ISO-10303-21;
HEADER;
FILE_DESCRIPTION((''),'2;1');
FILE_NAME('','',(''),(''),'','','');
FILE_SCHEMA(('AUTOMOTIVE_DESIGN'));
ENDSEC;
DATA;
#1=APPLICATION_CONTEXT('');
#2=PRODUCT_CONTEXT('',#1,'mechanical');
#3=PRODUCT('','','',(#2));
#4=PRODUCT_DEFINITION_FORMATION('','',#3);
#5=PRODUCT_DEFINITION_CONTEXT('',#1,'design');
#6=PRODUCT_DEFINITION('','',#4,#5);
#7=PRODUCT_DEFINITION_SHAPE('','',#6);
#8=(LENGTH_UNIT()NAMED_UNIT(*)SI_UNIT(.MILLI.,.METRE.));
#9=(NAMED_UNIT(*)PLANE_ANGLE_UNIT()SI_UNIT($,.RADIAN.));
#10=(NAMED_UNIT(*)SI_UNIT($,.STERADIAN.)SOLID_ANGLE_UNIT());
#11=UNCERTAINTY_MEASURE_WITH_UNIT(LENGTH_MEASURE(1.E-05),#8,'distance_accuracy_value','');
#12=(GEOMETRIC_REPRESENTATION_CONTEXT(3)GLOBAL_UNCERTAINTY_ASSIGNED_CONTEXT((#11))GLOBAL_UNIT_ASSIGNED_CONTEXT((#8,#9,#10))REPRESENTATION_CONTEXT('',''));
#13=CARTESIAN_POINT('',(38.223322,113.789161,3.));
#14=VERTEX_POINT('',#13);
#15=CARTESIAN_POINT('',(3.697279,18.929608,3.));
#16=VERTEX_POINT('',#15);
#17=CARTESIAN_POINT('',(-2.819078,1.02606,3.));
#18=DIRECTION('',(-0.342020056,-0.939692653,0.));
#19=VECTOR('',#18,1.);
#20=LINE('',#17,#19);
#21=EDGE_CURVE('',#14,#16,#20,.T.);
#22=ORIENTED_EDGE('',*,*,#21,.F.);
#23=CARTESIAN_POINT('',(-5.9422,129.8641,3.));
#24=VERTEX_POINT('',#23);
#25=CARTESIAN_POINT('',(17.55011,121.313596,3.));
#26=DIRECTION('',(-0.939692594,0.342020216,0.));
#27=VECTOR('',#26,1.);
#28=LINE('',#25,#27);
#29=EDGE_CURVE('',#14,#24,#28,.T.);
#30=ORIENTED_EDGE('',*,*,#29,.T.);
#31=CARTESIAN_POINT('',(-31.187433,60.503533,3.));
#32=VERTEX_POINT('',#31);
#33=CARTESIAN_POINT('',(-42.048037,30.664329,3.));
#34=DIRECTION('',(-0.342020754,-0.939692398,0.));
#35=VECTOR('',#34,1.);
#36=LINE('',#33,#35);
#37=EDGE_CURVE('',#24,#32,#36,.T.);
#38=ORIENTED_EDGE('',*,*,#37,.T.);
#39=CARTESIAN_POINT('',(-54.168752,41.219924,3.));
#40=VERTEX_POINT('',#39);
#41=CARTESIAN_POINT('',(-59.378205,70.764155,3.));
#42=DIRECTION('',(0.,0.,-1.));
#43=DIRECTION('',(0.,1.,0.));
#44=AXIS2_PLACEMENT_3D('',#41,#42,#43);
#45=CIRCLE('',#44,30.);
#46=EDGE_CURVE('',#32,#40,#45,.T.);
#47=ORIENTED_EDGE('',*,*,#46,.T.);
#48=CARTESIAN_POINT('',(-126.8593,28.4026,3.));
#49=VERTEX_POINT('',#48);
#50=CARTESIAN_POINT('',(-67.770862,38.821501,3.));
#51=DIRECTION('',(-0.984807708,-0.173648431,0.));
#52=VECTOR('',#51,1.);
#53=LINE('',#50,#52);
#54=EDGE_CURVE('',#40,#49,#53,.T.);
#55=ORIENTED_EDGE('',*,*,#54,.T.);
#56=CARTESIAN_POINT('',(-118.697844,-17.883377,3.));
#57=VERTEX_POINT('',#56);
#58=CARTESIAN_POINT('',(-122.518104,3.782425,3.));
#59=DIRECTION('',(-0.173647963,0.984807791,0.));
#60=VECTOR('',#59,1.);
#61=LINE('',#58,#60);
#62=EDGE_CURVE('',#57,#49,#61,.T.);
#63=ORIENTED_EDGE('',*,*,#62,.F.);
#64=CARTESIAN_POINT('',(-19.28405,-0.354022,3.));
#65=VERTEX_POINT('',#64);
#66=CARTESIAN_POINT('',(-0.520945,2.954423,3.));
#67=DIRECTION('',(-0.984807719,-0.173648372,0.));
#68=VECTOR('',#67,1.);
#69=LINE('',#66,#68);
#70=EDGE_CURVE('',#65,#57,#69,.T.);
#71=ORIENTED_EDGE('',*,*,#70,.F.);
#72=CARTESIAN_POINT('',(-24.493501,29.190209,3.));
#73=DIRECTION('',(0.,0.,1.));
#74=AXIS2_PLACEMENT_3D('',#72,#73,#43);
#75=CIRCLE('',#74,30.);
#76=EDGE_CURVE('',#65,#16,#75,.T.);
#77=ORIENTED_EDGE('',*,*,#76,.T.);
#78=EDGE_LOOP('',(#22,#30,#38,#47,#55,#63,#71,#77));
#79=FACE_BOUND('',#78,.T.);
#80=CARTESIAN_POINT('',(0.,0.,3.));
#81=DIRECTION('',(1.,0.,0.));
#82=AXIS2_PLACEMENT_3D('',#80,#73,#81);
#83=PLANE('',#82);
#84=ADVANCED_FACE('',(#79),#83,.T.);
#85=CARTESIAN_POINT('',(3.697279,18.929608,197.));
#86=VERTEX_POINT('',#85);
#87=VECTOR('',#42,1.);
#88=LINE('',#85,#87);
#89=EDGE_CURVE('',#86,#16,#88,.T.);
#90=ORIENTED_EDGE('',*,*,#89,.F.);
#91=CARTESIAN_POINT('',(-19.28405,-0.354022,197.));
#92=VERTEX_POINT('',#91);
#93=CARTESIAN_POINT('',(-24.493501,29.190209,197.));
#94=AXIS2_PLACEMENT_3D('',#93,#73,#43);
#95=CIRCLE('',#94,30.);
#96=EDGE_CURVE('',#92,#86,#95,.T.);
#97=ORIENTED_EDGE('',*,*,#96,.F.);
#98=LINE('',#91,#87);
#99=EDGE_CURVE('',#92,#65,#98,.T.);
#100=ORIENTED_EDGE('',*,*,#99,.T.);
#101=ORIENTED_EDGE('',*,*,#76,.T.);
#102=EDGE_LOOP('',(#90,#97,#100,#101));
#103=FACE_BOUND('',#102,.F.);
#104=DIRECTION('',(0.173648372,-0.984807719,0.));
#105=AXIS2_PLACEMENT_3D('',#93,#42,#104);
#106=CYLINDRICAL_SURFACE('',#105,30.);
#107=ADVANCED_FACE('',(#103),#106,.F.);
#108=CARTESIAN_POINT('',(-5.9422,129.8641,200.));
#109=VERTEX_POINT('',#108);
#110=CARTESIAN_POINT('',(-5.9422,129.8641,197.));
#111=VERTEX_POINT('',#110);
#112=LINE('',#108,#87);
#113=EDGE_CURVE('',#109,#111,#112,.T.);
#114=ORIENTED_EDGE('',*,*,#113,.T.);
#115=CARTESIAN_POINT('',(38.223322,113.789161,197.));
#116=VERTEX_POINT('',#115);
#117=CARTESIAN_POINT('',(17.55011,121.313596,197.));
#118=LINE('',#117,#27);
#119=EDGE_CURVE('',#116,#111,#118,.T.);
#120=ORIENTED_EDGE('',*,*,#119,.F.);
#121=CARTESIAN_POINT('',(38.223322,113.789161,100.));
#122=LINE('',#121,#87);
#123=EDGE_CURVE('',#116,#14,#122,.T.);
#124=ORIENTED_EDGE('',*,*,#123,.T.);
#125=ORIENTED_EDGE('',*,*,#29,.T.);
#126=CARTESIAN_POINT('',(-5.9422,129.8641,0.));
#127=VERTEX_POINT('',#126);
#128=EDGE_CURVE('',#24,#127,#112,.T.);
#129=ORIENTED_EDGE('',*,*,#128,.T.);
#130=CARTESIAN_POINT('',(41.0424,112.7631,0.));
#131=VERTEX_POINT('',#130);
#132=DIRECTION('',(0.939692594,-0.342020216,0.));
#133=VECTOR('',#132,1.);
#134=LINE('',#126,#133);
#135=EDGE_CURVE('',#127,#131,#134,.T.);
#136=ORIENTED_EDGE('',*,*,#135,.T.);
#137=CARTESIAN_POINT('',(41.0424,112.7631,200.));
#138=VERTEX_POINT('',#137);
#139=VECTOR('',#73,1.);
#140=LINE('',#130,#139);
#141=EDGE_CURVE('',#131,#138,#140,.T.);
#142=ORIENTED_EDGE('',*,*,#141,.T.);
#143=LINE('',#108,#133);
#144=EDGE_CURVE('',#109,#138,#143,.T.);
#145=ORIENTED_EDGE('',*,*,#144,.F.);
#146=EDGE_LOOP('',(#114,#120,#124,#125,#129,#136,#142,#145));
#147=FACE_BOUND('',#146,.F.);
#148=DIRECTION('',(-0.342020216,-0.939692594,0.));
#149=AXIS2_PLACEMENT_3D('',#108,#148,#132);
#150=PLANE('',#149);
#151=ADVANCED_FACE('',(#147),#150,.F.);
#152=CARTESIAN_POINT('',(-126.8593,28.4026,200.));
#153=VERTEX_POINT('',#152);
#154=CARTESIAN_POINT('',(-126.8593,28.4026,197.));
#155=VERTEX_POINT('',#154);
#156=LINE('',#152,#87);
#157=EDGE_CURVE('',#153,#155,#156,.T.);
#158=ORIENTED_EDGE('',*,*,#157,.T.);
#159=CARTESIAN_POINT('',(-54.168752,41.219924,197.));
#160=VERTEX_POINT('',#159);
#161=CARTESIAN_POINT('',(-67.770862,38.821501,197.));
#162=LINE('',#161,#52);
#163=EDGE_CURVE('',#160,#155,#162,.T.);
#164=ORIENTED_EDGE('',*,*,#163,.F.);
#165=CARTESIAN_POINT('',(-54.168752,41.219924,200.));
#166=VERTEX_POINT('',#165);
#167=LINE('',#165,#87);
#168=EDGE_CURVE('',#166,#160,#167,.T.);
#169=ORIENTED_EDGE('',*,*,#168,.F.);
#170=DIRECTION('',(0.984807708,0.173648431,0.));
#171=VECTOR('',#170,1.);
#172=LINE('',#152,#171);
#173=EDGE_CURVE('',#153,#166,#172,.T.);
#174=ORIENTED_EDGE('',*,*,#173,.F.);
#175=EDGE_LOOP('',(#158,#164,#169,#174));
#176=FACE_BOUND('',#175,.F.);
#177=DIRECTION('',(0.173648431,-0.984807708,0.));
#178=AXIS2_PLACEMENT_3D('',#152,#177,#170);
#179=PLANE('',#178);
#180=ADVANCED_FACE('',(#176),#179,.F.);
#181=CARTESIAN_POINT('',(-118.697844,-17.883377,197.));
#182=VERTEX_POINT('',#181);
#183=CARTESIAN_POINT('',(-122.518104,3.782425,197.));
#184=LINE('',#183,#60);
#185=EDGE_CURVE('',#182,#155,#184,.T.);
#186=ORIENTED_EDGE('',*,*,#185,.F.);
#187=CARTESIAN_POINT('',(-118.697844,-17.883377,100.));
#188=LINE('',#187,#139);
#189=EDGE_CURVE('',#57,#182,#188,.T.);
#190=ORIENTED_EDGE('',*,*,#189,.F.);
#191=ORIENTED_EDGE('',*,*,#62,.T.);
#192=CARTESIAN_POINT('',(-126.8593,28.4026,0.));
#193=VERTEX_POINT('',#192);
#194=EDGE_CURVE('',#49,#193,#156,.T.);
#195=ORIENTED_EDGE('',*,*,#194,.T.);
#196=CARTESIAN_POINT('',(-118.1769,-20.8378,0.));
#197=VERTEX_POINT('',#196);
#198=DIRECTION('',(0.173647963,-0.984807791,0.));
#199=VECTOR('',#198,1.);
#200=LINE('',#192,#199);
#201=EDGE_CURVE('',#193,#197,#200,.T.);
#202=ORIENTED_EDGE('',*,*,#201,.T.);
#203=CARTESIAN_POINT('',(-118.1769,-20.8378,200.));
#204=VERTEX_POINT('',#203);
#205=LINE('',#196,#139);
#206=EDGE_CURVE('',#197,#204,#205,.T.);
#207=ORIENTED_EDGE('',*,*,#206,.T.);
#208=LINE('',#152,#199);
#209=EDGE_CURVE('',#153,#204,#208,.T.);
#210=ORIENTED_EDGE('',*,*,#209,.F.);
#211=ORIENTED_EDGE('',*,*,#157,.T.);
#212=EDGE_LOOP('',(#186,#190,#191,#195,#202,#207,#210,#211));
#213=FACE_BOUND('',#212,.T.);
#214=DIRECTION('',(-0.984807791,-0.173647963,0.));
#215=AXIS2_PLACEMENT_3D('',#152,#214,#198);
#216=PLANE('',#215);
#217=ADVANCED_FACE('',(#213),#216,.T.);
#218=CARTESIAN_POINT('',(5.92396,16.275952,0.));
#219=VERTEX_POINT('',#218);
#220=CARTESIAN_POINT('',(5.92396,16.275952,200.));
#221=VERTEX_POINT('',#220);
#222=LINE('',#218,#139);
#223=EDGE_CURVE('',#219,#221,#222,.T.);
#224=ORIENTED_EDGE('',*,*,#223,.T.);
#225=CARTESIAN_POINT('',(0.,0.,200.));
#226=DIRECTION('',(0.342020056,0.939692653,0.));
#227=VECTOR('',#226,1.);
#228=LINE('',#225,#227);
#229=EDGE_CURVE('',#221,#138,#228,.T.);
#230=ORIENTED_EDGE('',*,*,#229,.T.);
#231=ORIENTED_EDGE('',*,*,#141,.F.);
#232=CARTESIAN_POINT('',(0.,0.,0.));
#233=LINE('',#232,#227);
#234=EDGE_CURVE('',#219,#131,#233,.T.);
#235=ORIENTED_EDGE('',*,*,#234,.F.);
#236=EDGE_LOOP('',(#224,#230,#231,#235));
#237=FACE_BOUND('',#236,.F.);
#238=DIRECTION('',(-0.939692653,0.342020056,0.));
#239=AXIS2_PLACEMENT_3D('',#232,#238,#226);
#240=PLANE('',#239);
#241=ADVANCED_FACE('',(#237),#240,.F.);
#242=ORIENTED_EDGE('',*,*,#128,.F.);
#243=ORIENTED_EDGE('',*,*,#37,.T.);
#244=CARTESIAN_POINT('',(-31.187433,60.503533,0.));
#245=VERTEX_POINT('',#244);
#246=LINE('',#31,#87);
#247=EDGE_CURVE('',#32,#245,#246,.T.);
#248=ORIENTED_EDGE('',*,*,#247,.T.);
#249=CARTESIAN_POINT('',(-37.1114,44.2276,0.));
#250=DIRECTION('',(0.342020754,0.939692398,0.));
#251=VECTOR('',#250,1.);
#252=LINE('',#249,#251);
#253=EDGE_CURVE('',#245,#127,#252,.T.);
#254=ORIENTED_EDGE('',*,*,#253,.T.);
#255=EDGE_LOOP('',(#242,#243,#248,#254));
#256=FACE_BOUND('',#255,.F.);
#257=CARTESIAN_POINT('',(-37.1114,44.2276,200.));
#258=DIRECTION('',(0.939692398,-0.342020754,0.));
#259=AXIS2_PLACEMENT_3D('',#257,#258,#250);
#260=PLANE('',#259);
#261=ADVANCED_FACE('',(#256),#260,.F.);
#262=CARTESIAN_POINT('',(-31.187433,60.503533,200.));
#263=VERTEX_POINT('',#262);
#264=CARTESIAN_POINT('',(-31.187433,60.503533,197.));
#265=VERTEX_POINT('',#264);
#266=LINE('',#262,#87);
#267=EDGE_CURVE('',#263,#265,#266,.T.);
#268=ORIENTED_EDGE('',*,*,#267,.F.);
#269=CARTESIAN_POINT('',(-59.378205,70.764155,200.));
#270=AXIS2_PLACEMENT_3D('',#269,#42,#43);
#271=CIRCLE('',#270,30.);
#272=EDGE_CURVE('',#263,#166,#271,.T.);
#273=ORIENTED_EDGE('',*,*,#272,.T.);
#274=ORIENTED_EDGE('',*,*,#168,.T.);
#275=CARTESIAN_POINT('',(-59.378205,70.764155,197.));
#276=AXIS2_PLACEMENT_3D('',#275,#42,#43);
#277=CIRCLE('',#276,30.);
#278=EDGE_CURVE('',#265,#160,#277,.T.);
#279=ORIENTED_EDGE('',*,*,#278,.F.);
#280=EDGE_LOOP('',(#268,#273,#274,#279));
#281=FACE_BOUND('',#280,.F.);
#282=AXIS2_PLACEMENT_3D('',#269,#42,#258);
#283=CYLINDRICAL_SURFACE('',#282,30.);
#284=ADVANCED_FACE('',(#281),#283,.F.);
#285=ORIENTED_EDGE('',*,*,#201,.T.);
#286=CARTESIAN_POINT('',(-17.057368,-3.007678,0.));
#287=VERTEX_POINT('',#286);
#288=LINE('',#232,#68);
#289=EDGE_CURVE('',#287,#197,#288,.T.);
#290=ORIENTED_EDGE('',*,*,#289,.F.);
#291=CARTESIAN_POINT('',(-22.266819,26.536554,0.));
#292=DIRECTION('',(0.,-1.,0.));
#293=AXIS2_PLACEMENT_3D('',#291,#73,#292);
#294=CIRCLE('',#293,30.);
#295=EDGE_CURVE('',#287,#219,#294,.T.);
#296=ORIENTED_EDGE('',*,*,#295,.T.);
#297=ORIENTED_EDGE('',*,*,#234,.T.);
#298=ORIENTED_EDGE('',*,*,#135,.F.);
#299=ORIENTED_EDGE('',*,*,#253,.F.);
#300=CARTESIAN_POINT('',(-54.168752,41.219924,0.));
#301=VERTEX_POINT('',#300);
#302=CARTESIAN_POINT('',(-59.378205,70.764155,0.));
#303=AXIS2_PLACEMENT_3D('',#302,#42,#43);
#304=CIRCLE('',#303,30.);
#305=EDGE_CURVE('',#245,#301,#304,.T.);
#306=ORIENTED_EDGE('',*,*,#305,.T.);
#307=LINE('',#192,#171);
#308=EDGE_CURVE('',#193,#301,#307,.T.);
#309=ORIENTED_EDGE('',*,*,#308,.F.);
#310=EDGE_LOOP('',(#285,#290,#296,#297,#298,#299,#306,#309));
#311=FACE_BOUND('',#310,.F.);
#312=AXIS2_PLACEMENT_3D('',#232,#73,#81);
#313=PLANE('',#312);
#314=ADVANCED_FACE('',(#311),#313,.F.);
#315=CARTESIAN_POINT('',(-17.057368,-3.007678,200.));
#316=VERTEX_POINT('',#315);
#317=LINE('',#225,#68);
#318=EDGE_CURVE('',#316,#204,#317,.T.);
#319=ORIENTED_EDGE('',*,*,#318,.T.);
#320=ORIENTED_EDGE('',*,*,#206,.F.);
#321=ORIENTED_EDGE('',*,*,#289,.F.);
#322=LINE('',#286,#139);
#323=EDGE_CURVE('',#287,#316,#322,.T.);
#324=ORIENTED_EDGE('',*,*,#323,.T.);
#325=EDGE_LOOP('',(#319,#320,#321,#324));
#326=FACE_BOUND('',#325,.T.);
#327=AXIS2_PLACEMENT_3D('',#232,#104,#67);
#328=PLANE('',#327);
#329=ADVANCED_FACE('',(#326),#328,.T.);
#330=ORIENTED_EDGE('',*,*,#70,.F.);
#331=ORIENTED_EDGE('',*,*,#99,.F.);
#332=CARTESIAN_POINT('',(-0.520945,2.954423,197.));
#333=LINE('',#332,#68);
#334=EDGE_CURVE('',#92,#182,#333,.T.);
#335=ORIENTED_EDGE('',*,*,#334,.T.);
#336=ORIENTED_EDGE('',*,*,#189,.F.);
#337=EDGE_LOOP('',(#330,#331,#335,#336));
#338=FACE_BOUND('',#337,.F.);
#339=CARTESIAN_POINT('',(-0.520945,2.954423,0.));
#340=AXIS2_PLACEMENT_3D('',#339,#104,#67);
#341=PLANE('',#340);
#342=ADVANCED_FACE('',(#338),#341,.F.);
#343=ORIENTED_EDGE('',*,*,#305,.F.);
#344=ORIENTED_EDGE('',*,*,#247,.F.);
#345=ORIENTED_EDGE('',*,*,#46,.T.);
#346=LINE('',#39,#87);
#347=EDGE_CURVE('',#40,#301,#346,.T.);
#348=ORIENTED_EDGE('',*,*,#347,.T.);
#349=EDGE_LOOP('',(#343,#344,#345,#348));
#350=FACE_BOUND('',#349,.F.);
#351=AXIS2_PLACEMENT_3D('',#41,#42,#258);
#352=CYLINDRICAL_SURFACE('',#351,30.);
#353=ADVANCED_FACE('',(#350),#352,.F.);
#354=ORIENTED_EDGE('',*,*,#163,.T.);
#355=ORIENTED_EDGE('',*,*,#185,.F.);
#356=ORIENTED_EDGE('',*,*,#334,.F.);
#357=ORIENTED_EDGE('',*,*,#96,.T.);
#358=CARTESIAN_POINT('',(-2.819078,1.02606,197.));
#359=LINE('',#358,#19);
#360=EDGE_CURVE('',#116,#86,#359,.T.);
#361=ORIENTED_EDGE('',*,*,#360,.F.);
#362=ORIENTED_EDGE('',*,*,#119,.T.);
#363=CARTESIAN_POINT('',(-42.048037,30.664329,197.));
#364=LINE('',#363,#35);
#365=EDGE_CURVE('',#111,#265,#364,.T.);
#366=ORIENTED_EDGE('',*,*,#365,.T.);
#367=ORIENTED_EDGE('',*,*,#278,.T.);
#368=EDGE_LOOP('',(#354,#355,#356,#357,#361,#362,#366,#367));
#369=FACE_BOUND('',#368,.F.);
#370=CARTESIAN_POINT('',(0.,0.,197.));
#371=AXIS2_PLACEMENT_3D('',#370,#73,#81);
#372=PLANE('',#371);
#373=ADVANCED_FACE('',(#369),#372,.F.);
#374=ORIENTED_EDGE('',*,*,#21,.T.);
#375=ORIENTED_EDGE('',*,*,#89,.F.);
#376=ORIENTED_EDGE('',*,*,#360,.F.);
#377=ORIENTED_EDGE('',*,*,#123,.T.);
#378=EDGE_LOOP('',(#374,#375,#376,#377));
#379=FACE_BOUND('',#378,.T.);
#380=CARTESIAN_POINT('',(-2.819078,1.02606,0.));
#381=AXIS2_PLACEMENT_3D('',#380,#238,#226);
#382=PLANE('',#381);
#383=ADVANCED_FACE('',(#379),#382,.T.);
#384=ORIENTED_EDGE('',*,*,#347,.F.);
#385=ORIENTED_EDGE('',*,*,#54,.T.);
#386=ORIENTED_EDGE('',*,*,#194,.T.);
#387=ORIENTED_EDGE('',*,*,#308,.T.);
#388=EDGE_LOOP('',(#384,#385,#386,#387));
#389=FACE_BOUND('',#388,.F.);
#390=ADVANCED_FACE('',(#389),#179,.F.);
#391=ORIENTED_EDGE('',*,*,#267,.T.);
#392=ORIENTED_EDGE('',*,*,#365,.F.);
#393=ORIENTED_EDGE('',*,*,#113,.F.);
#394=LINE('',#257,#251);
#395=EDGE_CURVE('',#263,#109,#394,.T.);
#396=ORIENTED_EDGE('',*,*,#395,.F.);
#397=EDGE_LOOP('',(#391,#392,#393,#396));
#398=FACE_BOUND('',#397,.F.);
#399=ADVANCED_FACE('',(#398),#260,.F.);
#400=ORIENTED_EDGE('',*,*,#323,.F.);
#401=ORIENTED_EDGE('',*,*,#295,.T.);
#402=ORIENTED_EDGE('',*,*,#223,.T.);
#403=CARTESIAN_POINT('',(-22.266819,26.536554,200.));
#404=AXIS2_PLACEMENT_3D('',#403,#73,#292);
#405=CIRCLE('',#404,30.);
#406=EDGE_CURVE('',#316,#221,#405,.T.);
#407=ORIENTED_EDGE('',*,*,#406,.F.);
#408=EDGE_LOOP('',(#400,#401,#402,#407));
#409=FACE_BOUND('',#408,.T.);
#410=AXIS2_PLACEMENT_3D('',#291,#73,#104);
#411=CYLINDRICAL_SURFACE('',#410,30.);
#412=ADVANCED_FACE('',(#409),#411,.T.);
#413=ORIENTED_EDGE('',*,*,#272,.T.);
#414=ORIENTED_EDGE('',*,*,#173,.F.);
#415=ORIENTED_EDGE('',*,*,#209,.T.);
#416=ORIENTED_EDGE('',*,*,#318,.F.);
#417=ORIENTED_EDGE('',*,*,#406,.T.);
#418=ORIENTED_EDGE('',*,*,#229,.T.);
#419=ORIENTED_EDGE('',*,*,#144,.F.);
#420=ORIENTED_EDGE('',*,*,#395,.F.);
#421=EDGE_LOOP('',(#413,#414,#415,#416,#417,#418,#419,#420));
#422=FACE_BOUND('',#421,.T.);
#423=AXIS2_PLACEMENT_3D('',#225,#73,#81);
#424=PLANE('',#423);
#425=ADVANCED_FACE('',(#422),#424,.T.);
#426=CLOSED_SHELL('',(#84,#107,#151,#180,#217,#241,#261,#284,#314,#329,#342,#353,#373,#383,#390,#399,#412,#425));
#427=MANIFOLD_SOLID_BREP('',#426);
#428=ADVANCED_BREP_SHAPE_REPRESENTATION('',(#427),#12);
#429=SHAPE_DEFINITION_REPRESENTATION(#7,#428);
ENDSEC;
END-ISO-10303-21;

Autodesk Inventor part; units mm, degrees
ref_plane "YZ Plane" through (0, 0, 0) normal (1, 0, 0) x (0, 1, 0)
ref_plane "XZ Plane" through (0, 0, 0) normal (0, 1, 0) x (-1, 0, 0)
ref_plane "XY Plane" through (0, 0, 0) normal (0, 0, 1) x (1, 0, 0)
sketch "草圖1" plane through (0, 0, 0) normal (0, 0, 1) x (1, 0, 0)
  line L0 (0, 0) -> (-118.1769, -20.8378)
  line L1 (0, 0) -> (41.0424, 112.7631)
  line L2 (-150.6339, 0) -> (72.9885, 0) projected
  line L3 (-1.9284, 2.2981) -> (38.2199, 113.7796)
  line L4 (-1.9284, 2.2981) -> (-118.6879, -17.8816)
  line L5 (0, 0) -> (-1.9284, 2.2981) construction
  line L6 (-118.6879, -17.8816) -> (-118.1769, -20.8378)
  line L7 (38.2199, 113.7796) -> (41.0424, 112.7631)
  dimension "d0" = 10
  dimension "d1" = 70
  dimension "d2" = 120
  dimension "d3" = 60
  dimension "d5" = 3
extrude "擠出1" add sketch "草圖1" along normal blind 200
sketch "草圖2" plane through (0, 0, 200) normal (0, 0, 1) x (1, 0, 0)
  line L0 (-118.1769, -20.8378) -> (0, 0) projected
  line L1 (0, 0) -> (41.0424, 112.7631) projected
  line L2 (41.0424, 112.7631) -> (38.2199, 113.7796) projected
  line L3 (38.2199, 113.7796) -> (-1.9284, 2.2981) projected
  line L4 (-1.9284, 2.2981) -> (-118.6879, -17.8816) projected
  line L5 (-118.6879, -17.8816) -> (-118.1769, -20.8378) projected
  line L6 (-118.1769, -20.8378) -> (0, 0)
  line L7 (0, 0) -> (41.0424, 112.7631)
  line L8 (-126.8593, 28.4026) -> (-37.1114, 44.2276)
  line L9 (-37.1114, 44.2276) -> (-5.9422, 129.8641)
  line L10 (-37.1114, 44.2276) -> (0, 0) construction
  line L11 (-126.8593, 28.4026) -> (-118.1769, -20.8378)
  line L12 (-5.9422, 129.8641) -> (41.0424, 112.7631)
  dimension "d9" = 60
  dimension "d10" = 50
extrude "擠出2" add sketch "草圖2" against normal blind 200 contours L11 L8 L9 L12 L2 L3 L4 L5
shell "薄殼1" thickness 3 removed faces 4 at (-16.3319, 101.3186, 133.3333) at (25.3809, 118.4635, 133.3333) at (-67.0274, 38.9526, 133.3333) at (-123.9652, 11.9891, 133.3333)
fillet "圓角2" radius 30 4 edges at (-2.2267, 2.6537, 100) (0, 0, 100) (-37.1114, 44.2276, 198.5) (-37.1114, 44.2276, 1.5)
sketch "草圖3" plane through (0, 0, 200) normal (0, 0, 1) x (1, 0, 0)
  arc A0 (-17.0574, -3.0077) -> (5.924, 16.276) centre (-22.2668, 26.5366) ccw projected
  line L0 (5.924, 16.276) -> (41.0424, 112.7631) projected
  line L1 (41.0424, 112.7631) -> (-5.9422, 129.8641) projected
  line L2 (-5.9422, 129.8641) -> (-31.1874, 60.5036) projected
  arc A1 (-54.1687, 41.2199) -> (-31.1874, 60.5036) centre (-59.3782, 70.7642) ccw projected
  line L3 (-54.1687, 41.2199) -> (-126.8593, 28.4026) projected
  line L4 (-126.8593, 28.4026) -> (-118.1769, -20.8378) projected
  line L5 (-118.1769, -20.8378) -> (-17.0574, -3.0077) projected
  point P0 (0, 0)
properties part number "splitter"
